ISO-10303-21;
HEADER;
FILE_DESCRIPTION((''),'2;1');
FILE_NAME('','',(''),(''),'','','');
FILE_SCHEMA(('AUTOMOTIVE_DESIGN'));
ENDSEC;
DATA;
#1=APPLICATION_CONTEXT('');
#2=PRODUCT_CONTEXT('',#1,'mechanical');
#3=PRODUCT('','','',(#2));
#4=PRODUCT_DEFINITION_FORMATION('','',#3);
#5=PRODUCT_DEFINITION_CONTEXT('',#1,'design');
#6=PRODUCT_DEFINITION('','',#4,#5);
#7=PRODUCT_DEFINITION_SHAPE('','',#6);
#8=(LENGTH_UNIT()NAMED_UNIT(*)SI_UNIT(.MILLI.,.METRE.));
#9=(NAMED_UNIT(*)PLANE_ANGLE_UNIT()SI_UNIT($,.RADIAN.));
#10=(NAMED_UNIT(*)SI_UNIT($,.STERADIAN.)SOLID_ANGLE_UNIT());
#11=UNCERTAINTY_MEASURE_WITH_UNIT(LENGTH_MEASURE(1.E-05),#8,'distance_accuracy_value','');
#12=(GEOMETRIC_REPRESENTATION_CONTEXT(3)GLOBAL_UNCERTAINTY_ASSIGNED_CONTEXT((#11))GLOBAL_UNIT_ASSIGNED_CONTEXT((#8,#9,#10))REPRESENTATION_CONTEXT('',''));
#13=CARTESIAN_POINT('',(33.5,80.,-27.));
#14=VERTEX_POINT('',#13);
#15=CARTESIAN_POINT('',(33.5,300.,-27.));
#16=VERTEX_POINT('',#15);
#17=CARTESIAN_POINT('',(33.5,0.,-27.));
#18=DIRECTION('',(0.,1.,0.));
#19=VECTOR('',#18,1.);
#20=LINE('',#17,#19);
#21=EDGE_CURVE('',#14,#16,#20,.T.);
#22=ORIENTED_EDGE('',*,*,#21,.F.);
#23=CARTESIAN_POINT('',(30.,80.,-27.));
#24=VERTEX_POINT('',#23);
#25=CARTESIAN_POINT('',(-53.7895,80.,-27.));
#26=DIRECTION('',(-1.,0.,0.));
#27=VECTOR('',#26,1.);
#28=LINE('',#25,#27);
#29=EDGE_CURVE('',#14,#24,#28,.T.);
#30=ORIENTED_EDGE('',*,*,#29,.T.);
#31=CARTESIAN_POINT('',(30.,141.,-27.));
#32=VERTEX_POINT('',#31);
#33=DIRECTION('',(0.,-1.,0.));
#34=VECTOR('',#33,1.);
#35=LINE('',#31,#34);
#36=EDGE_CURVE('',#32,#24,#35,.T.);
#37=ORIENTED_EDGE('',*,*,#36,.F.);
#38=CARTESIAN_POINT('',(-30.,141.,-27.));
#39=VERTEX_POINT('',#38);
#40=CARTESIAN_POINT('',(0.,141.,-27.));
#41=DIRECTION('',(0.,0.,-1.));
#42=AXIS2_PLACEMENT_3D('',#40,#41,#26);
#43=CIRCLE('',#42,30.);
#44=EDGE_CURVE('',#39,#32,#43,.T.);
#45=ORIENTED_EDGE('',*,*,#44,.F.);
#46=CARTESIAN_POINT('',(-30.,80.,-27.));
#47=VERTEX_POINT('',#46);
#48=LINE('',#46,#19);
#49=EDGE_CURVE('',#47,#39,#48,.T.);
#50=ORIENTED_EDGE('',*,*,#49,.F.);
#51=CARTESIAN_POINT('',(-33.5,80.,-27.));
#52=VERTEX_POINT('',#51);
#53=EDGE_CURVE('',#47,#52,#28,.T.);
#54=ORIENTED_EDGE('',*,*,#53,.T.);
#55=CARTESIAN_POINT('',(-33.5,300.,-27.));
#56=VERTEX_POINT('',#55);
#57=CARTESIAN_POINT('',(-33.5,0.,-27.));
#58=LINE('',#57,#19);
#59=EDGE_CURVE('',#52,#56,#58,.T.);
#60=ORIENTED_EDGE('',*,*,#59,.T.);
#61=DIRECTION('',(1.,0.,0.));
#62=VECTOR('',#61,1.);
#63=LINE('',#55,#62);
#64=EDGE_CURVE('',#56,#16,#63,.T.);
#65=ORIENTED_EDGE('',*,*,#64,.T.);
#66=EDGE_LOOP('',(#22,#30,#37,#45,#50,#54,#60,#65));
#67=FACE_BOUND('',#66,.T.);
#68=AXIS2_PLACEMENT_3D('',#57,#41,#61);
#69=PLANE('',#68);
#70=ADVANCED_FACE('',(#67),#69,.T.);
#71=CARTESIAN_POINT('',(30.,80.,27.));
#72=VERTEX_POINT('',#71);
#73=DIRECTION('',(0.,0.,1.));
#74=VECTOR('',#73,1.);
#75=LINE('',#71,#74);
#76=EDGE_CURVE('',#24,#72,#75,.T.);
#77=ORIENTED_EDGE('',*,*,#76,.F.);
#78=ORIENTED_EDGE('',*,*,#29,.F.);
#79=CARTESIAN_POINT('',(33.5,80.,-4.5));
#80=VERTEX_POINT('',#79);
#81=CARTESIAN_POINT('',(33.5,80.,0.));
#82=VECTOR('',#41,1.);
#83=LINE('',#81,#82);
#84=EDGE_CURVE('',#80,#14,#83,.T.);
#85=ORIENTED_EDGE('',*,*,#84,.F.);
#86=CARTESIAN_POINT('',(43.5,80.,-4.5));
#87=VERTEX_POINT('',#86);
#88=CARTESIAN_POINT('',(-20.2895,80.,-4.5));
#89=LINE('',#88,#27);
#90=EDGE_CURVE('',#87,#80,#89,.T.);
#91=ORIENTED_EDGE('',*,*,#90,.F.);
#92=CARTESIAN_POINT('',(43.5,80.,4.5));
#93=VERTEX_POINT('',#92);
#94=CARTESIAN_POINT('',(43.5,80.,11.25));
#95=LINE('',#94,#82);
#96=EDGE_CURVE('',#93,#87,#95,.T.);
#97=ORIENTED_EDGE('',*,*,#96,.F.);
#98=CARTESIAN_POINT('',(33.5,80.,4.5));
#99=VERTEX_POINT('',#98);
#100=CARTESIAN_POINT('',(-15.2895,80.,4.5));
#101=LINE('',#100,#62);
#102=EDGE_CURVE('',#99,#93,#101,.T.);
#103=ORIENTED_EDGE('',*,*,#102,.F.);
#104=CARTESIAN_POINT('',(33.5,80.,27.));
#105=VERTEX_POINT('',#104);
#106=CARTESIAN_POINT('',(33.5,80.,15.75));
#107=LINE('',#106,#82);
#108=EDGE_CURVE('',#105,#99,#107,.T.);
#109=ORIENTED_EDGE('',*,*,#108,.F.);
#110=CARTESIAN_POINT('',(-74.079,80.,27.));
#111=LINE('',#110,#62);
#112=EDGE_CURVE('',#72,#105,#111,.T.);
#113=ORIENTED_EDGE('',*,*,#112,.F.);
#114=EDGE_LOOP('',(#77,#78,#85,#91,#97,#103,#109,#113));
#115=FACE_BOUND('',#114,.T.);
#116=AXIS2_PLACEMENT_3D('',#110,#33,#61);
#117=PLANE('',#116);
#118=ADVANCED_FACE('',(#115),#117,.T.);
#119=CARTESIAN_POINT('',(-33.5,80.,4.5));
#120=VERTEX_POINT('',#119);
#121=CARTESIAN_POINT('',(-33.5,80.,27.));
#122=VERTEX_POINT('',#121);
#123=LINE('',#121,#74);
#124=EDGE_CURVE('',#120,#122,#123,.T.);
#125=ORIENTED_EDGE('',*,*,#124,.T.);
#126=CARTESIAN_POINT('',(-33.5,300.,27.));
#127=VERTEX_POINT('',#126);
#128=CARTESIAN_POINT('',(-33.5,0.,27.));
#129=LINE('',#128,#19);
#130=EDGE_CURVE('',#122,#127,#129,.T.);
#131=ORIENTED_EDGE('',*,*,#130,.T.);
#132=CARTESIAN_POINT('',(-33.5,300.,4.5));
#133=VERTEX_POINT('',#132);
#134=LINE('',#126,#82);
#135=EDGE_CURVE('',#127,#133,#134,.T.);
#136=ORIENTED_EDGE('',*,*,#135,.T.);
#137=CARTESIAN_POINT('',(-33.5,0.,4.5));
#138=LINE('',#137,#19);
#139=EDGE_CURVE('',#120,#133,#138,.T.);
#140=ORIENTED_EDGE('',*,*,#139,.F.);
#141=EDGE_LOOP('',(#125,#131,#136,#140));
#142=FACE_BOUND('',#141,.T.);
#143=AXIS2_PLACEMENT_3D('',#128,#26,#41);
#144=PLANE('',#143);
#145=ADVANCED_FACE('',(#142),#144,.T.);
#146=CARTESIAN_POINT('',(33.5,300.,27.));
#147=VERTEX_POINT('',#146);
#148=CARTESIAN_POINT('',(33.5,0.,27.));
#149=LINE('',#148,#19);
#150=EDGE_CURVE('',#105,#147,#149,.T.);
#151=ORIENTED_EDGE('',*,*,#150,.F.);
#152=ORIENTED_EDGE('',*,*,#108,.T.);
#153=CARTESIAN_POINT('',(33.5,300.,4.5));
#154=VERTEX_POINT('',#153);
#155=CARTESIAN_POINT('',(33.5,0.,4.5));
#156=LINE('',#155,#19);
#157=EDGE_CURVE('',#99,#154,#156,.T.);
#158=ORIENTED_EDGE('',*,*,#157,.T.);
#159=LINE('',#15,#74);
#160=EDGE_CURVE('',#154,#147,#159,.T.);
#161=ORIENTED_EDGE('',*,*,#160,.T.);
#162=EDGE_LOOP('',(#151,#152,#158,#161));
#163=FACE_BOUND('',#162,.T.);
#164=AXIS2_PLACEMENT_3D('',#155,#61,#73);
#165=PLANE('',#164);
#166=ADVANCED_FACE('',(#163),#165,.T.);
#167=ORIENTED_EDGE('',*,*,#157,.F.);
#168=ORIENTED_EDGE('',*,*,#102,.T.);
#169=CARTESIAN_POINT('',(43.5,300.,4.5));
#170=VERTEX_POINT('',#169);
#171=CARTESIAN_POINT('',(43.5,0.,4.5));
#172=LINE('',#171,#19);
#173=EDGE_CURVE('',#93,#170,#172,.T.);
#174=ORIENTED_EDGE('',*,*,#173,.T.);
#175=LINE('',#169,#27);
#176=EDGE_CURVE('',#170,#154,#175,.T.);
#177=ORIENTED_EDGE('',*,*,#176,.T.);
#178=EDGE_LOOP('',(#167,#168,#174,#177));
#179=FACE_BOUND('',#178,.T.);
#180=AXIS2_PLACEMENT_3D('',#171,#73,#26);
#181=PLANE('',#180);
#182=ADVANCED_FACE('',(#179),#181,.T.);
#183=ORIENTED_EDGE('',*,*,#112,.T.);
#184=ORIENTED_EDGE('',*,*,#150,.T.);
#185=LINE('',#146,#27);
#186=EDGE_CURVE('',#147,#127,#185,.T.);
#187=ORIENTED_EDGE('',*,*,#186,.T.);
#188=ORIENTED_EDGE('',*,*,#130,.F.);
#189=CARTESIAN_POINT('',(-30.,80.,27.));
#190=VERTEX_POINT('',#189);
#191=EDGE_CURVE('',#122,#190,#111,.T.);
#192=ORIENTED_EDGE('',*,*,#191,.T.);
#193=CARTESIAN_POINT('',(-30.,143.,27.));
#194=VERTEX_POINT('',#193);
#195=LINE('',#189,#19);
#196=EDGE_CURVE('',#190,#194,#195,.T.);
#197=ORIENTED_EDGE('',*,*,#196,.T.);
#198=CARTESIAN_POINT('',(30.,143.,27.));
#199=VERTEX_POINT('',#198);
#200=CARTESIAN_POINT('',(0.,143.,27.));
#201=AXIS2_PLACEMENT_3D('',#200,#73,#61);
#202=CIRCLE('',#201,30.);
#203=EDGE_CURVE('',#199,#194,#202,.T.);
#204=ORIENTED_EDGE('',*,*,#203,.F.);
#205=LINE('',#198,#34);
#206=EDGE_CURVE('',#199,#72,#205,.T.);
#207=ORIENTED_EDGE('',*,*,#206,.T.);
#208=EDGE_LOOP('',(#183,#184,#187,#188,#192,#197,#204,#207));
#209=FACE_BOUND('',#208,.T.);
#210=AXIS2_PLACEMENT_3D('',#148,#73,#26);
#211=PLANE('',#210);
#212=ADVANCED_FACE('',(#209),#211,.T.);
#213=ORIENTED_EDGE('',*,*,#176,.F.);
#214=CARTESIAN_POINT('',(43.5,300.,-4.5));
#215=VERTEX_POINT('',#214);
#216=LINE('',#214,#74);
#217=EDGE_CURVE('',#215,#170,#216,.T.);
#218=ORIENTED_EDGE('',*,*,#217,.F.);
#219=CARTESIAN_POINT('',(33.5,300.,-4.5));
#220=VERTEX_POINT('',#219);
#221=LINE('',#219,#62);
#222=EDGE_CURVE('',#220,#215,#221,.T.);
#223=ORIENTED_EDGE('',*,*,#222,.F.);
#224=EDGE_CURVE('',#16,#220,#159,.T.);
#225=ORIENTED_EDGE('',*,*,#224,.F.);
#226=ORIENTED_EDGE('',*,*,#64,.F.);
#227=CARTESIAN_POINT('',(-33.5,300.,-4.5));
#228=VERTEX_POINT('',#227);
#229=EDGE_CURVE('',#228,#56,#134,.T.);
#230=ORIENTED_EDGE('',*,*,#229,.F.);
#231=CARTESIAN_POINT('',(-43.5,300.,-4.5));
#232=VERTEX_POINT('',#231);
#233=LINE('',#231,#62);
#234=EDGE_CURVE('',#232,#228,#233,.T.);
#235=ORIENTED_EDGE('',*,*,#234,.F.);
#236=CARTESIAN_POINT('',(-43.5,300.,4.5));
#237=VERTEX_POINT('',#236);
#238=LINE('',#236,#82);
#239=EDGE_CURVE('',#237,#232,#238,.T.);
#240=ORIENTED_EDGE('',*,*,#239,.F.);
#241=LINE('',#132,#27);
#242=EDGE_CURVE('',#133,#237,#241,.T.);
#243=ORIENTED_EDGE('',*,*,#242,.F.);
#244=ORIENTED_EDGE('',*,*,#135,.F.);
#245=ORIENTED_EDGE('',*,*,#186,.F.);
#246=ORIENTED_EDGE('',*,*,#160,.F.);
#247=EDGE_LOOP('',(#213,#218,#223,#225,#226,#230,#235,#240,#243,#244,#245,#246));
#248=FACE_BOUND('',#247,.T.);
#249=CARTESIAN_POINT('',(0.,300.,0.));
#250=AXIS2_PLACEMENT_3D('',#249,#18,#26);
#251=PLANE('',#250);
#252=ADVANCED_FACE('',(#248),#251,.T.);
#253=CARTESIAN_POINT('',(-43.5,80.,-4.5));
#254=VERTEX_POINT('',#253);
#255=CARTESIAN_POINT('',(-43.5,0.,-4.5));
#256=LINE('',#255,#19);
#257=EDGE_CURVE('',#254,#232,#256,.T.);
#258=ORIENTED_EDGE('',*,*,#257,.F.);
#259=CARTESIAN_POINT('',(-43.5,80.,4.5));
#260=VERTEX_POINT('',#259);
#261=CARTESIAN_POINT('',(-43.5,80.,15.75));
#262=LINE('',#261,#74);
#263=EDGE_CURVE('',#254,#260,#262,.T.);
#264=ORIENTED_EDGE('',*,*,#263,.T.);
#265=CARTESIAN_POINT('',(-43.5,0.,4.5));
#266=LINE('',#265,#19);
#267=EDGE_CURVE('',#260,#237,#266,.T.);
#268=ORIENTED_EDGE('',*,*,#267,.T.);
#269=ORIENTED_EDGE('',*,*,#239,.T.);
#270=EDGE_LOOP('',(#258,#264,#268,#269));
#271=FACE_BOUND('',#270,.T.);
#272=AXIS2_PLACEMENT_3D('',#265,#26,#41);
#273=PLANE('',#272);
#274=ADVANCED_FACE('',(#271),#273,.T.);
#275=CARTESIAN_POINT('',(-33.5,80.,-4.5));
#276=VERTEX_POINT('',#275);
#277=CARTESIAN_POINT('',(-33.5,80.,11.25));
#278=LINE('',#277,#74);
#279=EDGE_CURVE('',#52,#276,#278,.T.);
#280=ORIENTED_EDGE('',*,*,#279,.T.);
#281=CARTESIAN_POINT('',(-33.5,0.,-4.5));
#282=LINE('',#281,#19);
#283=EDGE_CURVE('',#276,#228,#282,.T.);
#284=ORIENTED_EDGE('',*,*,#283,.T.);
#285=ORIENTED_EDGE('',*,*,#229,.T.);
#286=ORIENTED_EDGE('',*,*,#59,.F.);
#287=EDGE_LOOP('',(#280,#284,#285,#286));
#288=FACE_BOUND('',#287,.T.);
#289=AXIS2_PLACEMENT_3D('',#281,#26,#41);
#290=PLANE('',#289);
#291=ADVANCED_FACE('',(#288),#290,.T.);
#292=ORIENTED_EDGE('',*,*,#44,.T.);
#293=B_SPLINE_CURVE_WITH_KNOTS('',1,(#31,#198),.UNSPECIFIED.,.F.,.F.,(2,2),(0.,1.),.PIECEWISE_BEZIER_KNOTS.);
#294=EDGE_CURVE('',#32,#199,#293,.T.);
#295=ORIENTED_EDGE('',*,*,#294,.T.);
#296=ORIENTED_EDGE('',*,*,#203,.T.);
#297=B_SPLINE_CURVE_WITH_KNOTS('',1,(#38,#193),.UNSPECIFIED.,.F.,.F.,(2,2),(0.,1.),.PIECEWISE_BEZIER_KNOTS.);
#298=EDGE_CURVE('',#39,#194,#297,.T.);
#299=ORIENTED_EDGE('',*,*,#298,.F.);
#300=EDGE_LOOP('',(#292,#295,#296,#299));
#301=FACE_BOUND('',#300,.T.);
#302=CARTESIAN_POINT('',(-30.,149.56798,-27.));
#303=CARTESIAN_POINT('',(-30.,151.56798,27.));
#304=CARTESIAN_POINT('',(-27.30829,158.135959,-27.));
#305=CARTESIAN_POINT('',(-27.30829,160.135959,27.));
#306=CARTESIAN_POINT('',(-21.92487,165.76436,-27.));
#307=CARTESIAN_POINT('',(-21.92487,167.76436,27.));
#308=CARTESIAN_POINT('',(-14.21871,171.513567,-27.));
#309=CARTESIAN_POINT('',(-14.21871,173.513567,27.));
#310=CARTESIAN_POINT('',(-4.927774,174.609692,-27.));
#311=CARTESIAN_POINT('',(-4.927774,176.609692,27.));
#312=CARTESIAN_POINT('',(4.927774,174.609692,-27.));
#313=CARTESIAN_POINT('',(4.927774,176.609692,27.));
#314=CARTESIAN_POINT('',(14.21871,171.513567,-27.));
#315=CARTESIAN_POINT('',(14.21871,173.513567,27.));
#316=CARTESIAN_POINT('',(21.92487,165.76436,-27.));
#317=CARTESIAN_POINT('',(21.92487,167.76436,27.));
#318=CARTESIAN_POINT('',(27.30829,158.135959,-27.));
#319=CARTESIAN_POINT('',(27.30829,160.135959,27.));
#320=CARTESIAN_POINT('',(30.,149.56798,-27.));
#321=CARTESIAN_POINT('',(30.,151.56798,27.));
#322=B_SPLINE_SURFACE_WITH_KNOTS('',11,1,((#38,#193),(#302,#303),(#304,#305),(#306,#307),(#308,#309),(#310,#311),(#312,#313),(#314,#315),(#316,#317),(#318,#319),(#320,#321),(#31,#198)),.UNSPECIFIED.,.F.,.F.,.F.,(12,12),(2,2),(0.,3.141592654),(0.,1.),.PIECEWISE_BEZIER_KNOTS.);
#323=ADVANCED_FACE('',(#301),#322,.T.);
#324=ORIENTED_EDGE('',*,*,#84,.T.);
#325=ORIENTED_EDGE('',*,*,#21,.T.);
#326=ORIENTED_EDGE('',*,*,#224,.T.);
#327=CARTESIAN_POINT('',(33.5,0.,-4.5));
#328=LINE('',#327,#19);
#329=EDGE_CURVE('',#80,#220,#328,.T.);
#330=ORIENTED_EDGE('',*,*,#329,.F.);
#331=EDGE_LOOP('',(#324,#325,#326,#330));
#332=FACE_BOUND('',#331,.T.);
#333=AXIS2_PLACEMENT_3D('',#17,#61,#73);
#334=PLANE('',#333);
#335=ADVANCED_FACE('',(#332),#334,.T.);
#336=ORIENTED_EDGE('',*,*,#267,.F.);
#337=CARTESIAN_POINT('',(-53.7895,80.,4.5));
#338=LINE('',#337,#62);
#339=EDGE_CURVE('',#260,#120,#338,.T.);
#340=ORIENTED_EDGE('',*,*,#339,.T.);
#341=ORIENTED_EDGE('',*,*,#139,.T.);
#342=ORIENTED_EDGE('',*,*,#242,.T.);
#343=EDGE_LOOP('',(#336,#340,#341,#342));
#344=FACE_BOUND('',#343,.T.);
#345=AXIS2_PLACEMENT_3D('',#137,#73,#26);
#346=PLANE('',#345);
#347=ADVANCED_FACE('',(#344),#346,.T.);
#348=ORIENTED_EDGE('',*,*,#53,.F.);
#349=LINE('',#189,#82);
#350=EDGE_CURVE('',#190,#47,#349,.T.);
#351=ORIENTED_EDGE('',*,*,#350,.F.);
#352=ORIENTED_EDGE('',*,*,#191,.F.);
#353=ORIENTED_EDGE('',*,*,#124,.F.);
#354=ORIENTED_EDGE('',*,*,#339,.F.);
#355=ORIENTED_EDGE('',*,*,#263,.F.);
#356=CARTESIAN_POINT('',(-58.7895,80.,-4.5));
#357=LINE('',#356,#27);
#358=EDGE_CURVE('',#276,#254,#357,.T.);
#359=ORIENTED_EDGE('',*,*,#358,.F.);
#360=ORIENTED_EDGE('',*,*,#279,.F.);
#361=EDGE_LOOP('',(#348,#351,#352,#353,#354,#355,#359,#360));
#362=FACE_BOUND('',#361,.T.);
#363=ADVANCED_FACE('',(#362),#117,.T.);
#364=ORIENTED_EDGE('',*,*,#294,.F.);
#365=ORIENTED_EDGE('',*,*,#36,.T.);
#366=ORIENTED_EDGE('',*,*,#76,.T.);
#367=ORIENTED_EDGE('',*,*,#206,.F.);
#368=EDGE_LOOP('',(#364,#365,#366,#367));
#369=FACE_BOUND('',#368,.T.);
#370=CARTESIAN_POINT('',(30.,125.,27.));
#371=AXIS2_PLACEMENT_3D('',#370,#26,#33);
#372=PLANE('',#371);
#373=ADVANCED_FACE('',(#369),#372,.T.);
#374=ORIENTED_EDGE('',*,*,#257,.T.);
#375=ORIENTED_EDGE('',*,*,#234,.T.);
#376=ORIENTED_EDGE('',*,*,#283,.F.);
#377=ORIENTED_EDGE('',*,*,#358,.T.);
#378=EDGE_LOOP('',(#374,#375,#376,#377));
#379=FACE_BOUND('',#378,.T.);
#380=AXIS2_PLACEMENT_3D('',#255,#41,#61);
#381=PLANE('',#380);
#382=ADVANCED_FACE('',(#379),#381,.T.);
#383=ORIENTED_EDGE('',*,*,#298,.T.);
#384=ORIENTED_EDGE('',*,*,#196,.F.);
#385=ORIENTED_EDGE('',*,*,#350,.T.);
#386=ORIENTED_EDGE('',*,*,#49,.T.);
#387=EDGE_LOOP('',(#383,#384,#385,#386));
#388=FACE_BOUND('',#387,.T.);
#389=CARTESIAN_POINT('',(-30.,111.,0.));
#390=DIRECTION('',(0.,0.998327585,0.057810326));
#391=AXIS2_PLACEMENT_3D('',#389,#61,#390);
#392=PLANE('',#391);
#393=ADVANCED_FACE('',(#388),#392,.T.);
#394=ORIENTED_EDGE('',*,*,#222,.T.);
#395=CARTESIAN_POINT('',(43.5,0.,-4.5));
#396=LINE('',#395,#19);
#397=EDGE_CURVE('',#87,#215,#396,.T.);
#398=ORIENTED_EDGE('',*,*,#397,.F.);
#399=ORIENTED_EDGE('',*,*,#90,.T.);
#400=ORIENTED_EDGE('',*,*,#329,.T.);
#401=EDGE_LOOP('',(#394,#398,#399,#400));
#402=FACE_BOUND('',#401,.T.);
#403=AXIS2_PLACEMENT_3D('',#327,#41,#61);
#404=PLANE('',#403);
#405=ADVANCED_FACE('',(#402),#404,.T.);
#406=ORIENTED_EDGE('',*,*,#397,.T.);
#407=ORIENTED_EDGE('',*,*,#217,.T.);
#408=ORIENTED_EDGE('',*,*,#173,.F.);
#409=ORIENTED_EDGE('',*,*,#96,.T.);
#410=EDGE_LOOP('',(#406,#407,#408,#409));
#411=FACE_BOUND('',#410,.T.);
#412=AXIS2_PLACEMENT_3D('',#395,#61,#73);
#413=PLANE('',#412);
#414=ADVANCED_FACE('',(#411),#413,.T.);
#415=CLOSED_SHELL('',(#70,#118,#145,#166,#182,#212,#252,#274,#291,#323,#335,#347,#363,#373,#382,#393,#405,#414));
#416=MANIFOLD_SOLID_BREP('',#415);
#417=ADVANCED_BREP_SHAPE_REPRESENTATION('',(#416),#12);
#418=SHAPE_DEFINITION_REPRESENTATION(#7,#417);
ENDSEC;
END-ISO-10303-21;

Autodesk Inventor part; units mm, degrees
ref_plane "YZ Plane" through (0, 0, 0) normal (1, 0, 0) x (0, 1, 0)
ref_plane "XZ Plane" through (0, 0, 0) normal (0, 1, 0) x (-1, 0, 0)
ref_plane "XY Plane" through (0, 0, 0) normal (0, 0, 1) x (1, 0, 0)
sketch "草圖1" plane through (0, 0, 0) normal (0, 1, 0) x (-1, 0, 0)
  line L0 (-33.5, 27) -> (33.5, 27)
  line L1 (33.5, 27) -> (33.5, -27)
  line L2 (33.5, -27) -> (-33.5, -27)
  line L3 (-33.5, -27) -> (-33.5, 27)
  line L4 (-33.5, 27) -> (33.5, -27) construction
  line L5 (33.5, 27) -> (-33.5, -27) construction
  line L6 (43.5, -4.5) -> (33.5, -4.5)
  line L7 (33.5, -4.5) -> (33.5, 4.5)
  line L8 (33.5, 4.5) -> (43.5, 4.5)
  line L9 (43.5, 4.5) -> (43.5, -4.5)
  line L10 (-33.5, -4.5) -> (-43.5, -4.5)
  line L11 (-43.5, -4.5) -> (-43.5, 4.5)
  line L12 (-43.5, 4.5) -> (-33.5, 4.5)
  line L13 (-33.5, 4.5) -> (-33.5, -4.5)
  point P0 (0, 0)
  point P1 (33.5, 0)
  point P2 (-33.5, 0)
  point P3 (-33.5, 4.5)
  point P4 (-33.5, -4.5)
  dimension "d0" = 67
  dimension "d1" = 54
  dimension "d2" = 9
  dimension "d3" = 10
extrude "擠出1" add sketch "草圖1" along normal blind 300
sketch "草圖2" plane through (-33.5, 0, 27) normal (0, 0, 1) x (1, 0, 0)
  circle A0 centre (33.5, 125) radius 30
  line L0 (0, 0) -> (67, 0) projected
  line L1 (3.5, 125) -> (63.5, 125)
  line L2 (63.5, 125) -> (63.5, -22.0707)
  line L3 (63.5, -22.0707) -> (3.5, -22.0707)
  line L4 (3.5, -22.0707) -> (3.5, 125)
  point P0 (33.5, 0)
  point P1 (33.5, 0)
  point P2 (63.5, 125)
  dimension "d6" = 125
  dimension "d7" = 60
extrude "擠出2" cut sketch "草圖2" against normal through all
sketch "草圖3" plane through (-33.5, 300, 27) normal (0, 0, 1) x (1, 0, 0)
  line L0 (-40.579, -220) -> (107.579, -220)
  line L1 (107.579, -220) -> (107.579, -300)
  line L2 (107.579, -300) -> (-40.579, -300)
  line L3 (-40.579, -300) -> (-40.579, -220)
  point P0 (33.5, -300)
  point P1 (33.5, -300)
  dimension "d10" = 80
extrude "擠出3" cut sketch "草圖3" against normal through all
sketch "草圖4" plane through (33.5, 300, -27) normal (0, 0, -1) x (-1, 0, 0)
  arc A0 (63.5, -175) -> (3.5, -175) centre (33.5, -175) ccw construction
  circle A1 centre (33.5, -159) radius 30
  line L0 (63.5, -220) -> (3.5, -220)
  line L1 (3.5, -220) -> (3.5, -159)
  line L2 (3.5, -159) -> (63.5, -159)
  line L3 (63.5, -159) -> (63.5, -220)
  point P0 (33.5, -300)
  point P1 (63.5, -220)
  dimension "d13" = 16
  dimension "d14" = 60
sketch "草圖5" plane through (-33.5, 300, 27) normal (0, 0, 1) x (1, 0, 0)
  arc A0 (63.5, -175) -> (3.5, -175) centre (33.5, -175) ccw construction
  circle A1 centre (33.5, -157) radius 30
  line L0 (63.5, -220) -> (3.5, -220)
  line L1 (3.5, -220) -> (3.5, -157)
  line L2 (3.5, -157) -> (63.5, -157)
  line L3 (63.5, -157) -> (63.5, -220)
  point P0 (33.5, -300)
  dimension "d15" = 18
  dimension "d16" = 60
loft "斷面混成1" cut profiles "草圖4", "草圖5"
properties part number "Slider-5"
